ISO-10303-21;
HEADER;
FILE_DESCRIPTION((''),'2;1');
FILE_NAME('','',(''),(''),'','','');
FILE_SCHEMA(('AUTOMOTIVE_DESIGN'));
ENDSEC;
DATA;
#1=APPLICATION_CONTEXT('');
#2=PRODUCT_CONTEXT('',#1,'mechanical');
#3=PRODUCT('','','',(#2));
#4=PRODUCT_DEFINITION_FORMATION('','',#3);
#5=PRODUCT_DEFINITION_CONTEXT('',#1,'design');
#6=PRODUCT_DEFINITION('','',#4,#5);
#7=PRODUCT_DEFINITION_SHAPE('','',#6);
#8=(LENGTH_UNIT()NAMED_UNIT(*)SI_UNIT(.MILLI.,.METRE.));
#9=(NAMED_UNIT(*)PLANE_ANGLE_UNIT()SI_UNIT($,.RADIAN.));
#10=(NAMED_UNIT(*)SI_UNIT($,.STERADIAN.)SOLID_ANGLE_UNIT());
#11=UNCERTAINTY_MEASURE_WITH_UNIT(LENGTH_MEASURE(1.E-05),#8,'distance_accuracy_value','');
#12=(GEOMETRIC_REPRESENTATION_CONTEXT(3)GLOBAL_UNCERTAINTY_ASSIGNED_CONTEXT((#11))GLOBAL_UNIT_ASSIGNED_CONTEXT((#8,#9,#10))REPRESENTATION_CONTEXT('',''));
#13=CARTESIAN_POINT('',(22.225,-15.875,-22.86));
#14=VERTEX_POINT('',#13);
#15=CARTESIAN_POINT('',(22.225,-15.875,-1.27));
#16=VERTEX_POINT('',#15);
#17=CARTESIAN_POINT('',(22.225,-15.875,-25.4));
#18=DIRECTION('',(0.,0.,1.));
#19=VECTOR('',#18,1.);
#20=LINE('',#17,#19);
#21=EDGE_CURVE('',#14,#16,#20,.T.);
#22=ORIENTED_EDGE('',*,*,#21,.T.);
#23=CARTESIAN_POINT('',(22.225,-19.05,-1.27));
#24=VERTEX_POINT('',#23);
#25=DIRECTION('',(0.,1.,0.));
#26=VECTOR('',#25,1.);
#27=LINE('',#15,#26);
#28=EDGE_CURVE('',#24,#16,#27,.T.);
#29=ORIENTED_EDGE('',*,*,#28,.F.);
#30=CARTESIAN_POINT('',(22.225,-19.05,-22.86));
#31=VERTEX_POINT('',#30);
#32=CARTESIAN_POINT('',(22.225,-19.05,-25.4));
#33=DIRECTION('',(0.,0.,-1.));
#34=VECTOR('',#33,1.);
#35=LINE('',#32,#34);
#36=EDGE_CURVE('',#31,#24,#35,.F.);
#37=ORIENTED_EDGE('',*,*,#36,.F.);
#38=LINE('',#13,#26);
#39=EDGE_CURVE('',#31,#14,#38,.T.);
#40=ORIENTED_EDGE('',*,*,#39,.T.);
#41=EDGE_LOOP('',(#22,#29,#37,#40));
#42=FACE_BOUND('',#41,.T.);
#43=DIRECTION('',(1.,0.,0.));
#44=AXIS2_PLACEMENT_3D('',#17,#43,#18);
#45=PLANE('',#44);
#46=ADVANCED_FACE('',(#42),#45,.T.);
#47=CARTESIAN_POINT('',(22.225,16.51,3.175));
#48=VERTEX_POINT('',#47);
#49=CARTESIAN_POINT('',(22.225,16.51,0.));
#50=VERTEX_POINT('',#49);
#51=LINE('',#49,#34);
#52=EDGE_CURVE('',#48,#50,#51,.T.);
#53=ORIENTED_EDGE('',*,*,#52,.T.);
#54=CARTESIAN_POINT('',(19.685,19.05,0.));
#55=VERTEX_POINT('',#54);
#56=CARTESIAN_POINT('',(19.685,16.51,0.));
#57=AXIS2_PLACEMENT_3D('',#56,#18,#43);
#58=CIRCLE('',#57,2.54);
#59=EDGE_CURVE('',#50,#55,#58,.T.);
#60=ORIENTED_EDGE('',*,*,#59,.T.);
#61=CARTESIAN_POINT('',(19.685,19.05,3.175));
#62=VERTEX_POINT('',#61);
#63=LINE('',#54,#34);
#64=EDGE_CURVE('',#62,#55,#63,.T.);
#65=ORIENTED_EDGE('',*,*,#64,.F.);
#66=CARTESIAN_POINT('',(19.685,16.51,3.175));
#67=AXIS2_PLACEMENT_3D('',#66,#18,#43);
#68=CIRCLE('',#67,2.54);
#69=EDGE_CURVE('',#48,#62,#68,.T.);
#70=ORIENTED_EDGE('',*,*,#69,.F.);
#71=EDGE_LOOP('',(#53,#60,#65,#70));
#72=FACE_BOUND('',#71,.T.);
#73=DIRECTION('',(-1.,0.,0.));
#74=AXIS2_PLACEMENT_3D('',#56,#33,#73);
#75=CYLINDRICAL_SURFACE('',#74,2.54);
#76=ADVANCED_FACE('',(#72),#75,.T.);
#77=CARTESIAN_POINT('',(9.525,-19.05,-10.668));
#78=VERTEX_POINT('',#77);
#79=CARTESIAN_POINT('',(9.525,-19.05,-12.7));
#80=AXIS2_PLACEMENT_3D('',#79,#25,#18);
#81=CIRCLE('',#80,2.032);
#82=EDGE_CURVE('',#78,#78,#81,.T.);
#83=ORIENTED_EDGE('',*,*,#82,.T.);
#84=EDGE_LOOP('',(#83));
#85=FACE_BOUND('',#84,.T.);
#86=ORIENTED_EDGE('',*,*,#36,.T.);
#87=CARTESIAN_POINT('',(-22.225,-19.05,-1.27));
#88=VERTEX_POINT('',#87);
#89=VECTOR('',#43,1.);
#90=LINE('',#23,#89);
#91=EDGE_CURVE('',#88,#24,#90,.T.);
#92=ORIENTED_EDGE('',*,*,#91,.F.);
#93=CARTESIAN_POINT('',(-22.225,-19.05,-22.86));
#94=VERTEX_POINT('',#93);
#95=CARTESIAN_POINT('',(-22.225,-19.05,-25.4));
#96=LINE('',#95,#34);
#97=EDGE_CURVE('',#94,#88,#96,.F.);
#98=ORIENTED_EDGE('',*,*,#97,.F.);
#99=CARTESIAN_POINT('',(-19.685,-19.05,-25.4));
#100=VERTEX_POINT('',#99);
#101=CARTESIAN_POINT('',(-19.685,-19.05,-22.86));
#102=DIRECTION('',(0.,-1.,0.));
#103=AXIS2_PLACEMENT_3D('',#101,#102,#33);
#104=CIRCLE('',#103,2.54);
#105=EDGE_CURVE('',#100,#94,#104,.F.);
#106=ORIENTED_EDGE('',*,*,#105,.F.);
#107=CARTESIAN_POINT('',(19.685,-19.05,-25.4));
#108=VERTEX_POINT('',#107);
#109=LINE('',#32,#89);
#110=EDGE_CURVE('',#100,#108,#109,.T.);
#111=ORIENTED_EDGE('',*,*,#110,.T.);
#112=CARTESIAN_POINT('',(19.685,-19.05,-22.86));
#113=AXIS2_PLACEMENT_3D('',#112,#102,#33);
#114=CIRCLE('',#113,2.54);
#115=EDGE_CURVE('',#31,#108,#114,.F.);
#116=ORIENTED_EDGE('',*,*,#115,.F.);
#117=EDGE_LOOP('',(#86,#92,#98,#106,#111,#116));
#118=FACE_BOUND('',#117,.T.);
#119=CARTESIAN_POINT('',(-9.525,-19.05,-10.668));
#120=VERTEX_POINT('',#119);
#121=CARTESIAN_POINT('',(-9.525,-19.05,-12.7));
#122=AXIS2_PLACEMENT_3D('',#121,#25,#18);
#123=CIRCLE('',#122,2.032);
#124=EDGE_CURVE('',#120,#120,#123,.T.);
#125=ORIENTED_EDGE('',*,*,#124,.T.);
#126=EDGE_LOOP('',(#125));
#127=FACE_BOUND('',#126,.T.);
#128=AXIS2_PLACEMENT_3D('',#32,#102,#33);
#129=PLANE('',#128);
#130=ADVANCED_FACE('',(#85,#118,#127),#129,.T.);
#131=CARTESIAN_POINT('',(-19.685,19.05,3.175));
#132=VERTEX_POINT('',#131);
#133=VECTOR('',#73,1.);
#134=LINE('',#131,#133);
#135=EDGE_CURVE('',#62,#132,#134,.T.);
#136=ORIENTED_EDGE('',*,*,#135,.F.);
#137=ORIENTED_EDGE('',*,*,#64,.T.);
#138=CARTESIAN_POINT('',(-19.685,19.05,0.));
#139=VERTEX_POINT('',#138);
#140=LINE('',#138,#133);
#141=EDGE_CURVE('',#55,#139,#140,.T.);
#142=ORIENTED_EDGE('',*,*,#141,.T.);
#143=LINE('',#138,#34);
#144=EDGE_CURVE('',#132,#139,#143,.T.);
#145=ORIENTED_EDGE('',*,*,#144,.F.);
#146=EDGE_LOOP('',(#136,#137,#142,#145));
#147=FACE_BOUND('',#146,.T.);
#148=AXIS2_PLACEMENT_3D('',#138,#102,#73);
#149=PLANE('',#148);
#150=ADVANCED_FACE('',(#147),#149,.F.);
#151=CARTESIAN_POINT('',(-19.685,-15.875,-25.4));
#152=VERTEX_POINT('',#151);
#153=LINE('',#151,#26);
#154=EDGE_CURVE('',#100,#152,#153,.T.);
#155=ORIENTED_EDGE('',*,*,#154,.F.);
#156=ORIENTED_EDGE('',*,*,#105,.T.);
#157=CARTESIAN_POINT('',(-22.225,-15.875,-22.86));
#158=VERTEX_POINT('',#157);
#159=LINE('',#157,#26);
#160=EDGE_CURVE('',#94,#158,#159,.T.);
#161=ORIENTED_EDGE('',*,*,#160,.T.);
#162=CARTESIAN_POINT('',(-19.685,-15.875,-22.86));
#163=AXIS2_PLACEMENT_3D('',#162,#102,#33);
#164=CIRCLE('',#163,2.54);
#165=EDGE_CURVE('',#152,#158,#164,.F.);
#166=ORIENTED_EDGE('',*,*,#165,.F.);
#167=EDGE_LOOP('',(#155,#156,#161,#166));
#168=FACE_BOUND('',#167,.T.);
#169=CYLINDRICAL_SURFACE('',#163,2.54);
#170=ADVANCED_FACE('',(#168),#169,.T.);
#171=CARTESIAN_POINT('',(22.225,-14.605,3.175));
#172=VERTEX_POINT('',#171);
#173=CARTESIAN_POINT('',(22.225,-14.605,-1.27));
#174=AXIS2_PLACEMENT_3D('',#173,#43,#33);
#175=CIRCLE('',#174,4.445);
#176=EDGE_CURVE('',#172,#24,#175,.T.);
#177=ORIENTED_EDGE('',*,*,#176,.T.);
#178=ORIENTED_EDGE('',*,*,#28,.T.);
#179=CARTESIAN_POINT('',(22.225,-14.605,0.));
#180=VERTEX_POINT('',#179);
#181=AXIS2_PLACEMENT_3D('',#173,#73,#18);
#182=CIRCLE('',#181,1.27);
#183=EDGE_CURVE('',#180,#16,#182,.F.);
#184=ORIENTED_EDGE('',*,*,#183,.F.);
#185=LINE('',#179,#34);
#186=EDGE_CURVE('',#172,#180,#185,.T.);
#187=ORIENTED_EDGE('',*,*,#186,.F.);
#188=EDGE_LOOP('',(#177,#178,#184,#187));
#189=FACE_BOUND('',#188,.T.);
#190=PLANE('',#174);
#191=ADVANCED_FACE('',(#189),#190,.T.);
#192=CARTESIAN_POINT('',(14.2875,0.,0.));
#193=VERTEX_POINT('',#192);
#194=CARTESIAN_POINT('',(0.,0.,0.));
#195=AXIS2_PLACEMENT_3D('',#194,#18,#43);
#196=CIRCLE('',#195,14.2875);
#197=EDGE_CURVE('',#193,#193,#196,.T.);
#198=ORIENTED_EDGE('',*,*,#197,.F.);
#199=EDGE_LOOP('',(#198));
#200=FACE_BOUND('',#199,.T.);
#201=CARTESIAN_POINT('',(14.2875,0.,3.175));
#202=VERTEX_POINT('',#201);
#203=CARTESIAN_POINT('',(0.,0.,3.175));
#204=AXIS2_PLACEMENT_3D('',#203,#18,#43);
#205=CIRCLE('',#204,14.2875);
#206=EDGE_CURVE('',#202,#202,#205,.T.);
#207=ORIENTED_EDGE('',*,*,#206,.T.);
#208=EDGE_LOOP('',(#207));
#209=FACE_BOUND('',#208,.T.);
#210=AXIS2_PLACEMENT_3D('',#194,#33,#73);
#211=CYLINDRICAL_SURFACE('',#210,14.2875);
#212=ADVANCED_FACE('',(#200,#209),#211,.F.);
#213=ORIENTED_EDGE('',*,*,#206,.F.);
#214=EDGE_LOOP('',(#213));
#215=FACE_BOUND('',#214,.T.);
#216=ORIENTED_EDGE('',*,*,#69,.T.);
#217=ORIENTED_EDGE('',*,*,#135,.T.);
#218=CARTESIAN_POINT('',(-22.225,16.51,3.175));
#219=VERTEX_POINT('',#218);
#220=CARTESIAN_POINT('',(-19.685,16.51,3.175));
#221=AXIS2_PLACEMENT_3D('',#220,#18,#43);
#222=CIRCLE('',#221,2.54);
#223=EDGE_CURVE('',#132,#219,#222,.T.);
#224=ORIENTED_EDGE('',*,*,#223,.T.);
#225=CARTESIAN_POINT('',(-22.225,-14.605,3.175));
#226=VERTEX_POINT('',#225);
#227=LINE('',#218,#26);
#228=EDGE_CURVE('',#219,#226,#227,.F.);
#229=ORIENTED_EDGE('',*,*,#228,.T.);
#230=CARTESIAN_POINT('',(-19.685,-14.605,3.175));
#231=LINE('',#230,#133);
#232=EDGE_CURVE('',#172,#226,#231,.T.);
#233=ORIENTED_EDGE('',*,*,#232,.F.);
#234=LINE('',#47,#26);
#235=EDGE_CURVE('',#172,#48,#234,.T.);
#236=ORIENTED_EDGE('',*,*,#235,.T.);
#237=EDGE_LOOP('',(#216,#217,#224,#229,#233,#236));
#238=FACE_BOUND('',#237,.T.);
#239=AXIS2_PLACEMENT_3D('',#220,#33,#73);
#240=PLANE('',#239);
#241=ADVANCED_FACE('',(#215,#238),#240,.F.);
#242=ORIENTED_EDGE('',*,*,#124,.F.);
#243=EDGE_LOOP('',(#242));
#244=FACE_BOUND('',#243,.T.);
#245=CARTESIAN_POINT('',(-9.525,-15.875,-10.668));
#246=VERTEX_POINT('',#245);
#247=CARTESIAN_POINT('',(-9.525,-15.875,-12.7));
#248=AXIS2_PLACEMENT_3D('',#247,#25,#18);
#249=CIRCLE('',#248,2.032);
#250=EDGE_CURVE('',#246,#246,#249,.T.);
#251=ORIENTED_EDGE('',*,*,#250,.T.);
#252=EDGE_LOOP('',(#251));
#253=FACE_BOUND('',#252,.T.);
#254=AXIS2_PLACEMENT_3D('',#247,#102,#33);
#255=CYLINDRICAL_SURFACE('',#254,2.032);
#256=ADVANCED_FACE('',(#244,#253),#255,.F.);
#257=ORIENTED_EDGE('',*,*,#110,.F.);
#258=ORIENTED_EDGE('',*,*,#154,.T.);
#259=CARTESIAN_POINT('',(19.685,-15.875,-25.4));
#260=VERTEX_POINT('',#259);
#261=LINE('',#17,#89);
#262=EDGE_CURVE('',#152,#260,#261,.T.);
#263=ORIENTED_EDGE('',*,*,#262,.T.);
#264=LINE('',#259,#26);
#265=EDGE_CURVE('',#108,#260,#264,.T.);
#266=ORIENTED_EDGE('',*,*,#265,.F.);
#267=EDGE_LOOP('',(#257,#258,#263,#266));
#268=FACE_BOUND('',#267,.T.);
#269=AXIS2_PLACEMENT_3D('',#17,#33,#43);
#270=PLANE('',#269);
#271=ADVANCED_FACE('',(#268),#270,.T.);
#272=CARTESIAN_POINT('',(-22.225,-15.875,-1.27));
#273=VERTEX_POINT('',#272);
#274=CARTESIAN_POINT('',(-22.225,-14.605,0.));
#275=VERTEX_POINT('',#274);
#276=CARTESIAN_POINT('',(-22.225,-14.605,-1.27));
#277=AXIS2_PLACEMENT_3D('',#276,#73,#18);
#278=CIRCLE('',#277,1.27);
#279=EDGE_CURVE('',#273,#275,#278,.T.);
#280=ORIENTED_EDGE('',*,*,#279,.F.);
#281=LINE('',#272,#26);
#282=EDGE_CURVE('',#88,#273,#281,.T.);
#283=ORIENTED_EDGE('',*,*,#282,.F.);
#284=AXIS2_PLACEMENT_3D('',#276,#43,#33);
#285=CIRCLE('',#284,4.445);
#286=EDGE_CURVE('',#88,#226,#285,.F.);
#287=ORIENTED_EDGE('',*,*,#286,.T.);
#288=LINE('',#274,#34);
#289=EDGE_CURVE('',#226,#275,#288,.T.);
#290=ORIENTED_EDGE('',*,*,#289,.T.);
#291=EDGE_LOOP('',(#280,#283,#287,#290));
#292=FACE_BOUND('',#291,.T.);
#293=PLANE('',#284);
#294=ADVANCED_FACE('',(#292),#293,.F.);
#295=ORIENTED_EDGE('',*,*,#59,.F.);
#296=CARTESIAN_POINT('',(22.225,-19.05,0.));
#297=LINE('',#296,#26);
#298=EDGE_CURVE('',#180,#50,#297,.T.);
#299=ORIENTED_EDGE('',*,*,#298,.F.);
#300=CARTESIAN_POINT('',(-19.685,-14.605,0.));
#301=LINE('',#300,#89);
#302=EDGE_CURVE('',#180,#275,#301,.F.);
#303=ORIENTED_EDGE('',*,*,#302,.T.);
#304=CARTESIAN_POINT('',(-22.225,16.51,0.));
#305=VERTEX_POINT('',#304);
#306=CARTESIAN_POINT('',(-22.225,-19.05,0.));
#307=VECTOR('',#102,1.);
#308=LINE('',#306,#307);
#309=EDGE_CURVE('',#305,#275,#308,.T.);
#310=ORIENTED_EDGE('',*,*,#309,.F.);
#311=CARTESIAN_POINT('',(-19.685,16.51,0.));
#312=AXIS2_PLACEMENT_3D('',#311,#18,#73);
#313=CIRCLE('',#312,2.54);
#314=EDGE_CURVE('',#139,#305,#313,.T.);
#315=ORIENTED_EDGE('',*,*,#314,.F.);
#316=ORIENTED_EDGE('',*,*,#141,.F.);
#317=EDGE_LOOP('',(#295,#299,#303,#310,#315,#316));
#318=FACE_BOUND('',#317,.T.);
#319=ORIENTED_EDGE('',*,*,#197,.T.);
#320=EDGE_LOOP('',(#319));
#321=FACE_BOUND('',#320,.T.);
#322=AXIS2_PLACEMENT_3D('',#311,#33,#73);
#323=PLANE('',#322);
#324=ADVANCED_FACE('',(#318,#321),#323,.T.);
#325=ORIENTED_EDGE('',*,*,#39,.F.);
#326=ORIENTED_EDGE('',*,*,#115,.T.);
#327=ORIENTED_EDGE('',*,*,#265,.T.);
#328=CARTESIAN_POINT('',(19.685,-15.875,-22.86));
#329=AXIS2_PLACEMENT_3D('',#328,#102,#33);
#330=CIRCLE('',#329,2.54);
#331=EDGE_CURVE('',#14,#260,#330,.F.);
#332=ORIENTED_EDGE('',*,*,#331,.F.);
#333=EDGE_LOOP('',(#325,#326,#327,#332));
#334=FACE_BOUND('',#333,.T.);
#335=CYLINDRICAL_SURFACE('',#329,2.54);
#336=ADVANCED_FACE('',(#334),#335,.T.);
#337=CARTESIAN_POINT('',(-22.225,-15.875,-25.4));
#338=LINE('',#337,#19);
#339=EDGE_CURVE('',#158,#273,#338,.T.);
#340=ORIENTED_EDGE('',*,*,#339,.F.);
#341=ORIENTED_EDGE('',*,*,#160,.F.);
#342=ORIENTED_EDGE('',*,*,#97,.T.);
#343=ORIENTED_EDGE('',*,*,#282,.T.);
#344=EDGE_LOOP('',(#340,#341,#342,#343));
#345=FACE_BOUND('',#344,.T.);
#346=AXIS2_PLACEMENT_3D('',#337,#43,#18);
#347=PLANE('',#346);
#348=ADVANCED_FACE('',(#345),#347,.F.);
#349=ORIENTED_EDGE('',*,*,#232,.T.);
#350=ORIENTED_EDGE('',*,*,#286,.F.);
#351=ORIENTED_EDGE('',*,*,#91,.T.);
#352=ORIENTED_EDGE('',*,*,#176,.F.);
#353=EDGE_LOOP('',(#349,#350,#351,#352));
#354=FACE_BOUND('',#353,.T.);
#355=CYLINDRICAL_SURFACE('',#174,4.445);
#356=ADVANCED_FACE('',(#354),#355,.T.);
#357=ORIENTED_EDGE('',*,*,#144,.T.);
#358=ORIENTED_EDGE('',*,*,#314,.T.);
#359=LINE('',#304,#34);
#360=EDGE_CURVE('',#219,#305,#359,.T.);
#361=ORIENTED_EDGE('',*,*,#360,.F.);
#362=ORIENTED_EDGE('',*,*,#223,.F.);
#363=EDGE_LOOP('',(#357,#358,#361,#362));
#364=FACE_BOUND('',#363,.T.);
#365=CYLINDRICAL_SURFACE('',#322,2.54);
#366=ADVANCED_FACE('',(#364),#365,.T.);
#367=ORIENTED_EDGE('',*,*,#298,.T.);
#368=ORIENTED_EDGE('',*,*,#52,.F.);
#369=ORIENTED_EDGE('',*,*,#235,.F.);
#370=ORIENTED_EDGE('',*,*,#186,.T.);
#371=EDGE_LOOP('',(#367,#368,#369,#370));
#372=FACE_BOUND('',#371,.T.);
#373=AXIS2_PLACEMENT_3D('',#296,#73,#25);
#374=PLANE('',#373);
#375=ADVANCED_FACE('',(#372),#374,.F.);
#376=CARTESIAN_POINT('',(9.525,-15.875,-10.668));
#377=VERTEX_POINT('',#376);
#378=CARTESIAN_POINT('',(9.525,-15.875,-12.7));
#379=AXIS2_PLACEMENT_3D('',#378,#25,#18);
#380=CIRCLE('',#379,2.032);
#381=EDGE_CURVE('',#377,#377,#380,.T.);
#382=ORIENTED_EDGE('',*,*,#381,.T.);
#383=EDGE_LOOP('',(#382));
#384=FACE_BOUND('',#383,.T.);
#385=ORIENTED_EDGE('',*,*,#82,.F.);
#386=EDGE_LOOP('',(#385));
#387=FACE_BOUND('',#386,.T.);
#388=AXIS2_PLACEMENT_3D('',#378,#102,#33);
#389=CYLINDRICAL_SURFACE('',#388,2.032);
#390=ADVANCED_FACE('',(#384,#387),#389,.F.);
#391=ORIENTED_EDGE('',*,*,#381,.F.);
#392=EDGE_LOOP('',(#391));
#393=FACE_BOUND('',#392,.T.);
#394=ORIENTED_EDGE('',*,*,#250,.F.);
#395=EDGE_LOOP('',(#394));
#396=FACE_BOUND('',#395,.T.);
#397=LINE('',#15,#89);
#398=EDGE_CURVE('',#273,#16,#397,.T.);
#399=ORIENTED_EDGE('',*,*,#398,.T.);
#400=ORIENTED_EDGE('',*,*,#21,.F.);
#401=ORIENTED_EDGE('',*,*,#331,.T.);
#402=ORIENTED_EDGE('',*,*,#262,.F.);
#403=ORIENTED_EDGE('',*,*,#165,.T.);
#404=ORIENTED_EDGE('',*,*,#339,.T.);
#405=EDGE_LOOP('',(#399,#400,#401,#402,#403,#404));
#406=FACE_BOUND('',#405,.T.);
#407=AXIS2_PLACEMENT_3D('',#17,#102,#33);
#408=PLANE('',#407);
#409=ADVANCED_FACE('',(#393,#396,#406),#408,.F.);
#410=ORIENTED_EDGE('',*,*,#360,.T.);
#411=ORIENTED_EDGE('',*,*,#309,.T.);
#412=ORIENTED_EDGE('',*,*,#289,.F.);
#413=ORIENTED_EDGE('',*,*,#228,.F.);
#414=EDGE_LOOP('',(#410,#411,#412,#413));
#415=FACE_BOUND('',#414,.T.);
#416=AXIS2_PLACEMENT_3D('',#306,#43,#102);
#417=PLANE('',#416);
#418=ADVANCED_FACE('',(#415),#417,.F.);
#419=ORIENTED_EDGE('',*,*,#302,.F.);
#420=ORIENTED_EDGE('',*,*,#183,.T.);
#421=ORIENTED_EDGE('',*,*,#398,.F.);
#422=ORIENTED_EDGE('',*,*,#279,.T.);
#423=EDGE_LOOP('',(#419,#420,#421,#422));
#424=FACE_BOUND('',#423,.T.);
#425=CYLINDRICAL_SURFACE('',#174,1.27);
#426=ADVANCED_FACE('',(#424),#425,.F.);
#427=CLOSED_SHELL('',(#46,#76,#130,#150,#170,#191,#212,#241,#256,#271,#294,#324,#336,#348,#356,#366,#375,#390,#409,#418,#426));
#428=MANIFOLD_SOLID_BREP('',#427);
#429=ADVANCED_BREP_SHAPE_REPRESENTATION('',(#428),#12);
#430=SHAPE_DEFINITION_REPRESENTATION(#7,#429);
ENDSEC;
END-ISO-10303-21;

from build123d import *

# Parameters (mm, degrees)
SKETCH2_R              = 14.2875
BOSS_EXTRUDE1_DEPTH    = 3.175
SKETCH3_W              = 44.45
SKETCH3_H              = 3.175
BOSS_EXTRUDE2_DEPTH    = 25.4
SKETCH4_R              = 2.032
CUT_EXTRUDE1_DEPTH     = 25.4
FILLET1_R              = 2.54
CONVERT_SOLID1_START   = -22.225
CONVERT_SOLID1_DEPTH   = 44.45
CONVERT_SOLID1_2_DEPTH = 44.45


# Read off the part's stored shape, not the designer's step: Convert-Solid1
with BuildPart() as part:
    # Sketch2 → Boss-Extrude1 (new body)
    with BuildSketch(Plane.XY):
        with BuildLine():
            Line((-22.225, -19.05), (22.225, -19.05))
            Line((22.225, -19.05), (22.225, 16.51))
            ThreePointArc((22.225, 16.51), (21.481051224, 18.306051224), (19.685, 19.05))
            Line((19.685, 19.05), (-19.685, 19.05))
            ThreePointArc((-19.685, 19.05), (-21.481051224, 18.306051224), (-22.225, 16.51))
            Line((-22.225, 16.51), (-22.225, -19.05))
        make_face()
        Circle(SKETCH2_R, mode=Mode.SUBTRACT)
    extrude(amount=BOSS_EXTRUDE1_DEPTH)

    # Sketch3 → Boss-Extrude2 (add)
    with BuildSketch(Plane(origin=(0, 0, 0), x_dir=(-1, 0, 0), z_dir=(0, 0, -1))):
        with Locations((0, -17.4625)):
            Rectangle(SKETCH3_W, SKETCH3_H)
    extrude(amount=BOSS_EXTRUDE2_DEPTH)

    # Sketch4 → Cut-Extrude1 (cut)
    with BuildSketch(Plane(origin=(0, -15.875, 0), x_dir=(1, 0, 0), z_dir=(0, 1, 0))):
        with Locations(Location((-9.525, 12.7, 0), (0, 0, 270))):
            Circle(SKETCH4_R)
        with Locations(Location((9.525, 12.7, 0), (0, 0, 270))):
            Circle(SKETCH4_R)
    extrude(amount=-CUT_EXTRUDE1_DEPTH, mode=Mode.SUBTRACT)

    # Fillet1
    fillet1_edges = [part.edges().sort_by_distance(p)[0] for p in [
        (22.225, -17.4625, -25.4),
        (-22.225, -17.4625, -25.4),
    ]]
    fillet(fillet1_edges, radius=FILLET1_R)

    # Convert-Solid1 outline → Convert-Solid1 (cut)
    with BuildSketch(Plane.YZ.offset(CONVERT_SOLID1_START)):
        with BuildLine():
            ThreePointArc((-19.05, -1.27), (-17.748089642, 1.873089642), (-14.605, 3.175))
            Line((-14.605, 3.175), (-19.05, 3.175))
            Line((-19.05, 3.175), (-19.05, -1.27))
        make_face()
    extrude(amount=CONVERT_SOLID1_DEPTH, mode=Mode.SUBTRACT)

    # Convert-Solid1 2 outline → Convert-Solid1 2 (add)
    with BuildSketch(Plane.YZ.offset(CONVERT_SOLID1_START)):
        with BuildLine():
            ThreePointArc((-15.875, -1.27), (-15.503025612, -0.371974388), (-14.605, 0))
            Line((-14.605, 0), (-15.875, 0))
            Line((-15.875, 0), (-15.875, -1.27))
        make_face()
    extrude(amount=CONVERT_SOLID1_2_DEPTH)


solid = part.part
